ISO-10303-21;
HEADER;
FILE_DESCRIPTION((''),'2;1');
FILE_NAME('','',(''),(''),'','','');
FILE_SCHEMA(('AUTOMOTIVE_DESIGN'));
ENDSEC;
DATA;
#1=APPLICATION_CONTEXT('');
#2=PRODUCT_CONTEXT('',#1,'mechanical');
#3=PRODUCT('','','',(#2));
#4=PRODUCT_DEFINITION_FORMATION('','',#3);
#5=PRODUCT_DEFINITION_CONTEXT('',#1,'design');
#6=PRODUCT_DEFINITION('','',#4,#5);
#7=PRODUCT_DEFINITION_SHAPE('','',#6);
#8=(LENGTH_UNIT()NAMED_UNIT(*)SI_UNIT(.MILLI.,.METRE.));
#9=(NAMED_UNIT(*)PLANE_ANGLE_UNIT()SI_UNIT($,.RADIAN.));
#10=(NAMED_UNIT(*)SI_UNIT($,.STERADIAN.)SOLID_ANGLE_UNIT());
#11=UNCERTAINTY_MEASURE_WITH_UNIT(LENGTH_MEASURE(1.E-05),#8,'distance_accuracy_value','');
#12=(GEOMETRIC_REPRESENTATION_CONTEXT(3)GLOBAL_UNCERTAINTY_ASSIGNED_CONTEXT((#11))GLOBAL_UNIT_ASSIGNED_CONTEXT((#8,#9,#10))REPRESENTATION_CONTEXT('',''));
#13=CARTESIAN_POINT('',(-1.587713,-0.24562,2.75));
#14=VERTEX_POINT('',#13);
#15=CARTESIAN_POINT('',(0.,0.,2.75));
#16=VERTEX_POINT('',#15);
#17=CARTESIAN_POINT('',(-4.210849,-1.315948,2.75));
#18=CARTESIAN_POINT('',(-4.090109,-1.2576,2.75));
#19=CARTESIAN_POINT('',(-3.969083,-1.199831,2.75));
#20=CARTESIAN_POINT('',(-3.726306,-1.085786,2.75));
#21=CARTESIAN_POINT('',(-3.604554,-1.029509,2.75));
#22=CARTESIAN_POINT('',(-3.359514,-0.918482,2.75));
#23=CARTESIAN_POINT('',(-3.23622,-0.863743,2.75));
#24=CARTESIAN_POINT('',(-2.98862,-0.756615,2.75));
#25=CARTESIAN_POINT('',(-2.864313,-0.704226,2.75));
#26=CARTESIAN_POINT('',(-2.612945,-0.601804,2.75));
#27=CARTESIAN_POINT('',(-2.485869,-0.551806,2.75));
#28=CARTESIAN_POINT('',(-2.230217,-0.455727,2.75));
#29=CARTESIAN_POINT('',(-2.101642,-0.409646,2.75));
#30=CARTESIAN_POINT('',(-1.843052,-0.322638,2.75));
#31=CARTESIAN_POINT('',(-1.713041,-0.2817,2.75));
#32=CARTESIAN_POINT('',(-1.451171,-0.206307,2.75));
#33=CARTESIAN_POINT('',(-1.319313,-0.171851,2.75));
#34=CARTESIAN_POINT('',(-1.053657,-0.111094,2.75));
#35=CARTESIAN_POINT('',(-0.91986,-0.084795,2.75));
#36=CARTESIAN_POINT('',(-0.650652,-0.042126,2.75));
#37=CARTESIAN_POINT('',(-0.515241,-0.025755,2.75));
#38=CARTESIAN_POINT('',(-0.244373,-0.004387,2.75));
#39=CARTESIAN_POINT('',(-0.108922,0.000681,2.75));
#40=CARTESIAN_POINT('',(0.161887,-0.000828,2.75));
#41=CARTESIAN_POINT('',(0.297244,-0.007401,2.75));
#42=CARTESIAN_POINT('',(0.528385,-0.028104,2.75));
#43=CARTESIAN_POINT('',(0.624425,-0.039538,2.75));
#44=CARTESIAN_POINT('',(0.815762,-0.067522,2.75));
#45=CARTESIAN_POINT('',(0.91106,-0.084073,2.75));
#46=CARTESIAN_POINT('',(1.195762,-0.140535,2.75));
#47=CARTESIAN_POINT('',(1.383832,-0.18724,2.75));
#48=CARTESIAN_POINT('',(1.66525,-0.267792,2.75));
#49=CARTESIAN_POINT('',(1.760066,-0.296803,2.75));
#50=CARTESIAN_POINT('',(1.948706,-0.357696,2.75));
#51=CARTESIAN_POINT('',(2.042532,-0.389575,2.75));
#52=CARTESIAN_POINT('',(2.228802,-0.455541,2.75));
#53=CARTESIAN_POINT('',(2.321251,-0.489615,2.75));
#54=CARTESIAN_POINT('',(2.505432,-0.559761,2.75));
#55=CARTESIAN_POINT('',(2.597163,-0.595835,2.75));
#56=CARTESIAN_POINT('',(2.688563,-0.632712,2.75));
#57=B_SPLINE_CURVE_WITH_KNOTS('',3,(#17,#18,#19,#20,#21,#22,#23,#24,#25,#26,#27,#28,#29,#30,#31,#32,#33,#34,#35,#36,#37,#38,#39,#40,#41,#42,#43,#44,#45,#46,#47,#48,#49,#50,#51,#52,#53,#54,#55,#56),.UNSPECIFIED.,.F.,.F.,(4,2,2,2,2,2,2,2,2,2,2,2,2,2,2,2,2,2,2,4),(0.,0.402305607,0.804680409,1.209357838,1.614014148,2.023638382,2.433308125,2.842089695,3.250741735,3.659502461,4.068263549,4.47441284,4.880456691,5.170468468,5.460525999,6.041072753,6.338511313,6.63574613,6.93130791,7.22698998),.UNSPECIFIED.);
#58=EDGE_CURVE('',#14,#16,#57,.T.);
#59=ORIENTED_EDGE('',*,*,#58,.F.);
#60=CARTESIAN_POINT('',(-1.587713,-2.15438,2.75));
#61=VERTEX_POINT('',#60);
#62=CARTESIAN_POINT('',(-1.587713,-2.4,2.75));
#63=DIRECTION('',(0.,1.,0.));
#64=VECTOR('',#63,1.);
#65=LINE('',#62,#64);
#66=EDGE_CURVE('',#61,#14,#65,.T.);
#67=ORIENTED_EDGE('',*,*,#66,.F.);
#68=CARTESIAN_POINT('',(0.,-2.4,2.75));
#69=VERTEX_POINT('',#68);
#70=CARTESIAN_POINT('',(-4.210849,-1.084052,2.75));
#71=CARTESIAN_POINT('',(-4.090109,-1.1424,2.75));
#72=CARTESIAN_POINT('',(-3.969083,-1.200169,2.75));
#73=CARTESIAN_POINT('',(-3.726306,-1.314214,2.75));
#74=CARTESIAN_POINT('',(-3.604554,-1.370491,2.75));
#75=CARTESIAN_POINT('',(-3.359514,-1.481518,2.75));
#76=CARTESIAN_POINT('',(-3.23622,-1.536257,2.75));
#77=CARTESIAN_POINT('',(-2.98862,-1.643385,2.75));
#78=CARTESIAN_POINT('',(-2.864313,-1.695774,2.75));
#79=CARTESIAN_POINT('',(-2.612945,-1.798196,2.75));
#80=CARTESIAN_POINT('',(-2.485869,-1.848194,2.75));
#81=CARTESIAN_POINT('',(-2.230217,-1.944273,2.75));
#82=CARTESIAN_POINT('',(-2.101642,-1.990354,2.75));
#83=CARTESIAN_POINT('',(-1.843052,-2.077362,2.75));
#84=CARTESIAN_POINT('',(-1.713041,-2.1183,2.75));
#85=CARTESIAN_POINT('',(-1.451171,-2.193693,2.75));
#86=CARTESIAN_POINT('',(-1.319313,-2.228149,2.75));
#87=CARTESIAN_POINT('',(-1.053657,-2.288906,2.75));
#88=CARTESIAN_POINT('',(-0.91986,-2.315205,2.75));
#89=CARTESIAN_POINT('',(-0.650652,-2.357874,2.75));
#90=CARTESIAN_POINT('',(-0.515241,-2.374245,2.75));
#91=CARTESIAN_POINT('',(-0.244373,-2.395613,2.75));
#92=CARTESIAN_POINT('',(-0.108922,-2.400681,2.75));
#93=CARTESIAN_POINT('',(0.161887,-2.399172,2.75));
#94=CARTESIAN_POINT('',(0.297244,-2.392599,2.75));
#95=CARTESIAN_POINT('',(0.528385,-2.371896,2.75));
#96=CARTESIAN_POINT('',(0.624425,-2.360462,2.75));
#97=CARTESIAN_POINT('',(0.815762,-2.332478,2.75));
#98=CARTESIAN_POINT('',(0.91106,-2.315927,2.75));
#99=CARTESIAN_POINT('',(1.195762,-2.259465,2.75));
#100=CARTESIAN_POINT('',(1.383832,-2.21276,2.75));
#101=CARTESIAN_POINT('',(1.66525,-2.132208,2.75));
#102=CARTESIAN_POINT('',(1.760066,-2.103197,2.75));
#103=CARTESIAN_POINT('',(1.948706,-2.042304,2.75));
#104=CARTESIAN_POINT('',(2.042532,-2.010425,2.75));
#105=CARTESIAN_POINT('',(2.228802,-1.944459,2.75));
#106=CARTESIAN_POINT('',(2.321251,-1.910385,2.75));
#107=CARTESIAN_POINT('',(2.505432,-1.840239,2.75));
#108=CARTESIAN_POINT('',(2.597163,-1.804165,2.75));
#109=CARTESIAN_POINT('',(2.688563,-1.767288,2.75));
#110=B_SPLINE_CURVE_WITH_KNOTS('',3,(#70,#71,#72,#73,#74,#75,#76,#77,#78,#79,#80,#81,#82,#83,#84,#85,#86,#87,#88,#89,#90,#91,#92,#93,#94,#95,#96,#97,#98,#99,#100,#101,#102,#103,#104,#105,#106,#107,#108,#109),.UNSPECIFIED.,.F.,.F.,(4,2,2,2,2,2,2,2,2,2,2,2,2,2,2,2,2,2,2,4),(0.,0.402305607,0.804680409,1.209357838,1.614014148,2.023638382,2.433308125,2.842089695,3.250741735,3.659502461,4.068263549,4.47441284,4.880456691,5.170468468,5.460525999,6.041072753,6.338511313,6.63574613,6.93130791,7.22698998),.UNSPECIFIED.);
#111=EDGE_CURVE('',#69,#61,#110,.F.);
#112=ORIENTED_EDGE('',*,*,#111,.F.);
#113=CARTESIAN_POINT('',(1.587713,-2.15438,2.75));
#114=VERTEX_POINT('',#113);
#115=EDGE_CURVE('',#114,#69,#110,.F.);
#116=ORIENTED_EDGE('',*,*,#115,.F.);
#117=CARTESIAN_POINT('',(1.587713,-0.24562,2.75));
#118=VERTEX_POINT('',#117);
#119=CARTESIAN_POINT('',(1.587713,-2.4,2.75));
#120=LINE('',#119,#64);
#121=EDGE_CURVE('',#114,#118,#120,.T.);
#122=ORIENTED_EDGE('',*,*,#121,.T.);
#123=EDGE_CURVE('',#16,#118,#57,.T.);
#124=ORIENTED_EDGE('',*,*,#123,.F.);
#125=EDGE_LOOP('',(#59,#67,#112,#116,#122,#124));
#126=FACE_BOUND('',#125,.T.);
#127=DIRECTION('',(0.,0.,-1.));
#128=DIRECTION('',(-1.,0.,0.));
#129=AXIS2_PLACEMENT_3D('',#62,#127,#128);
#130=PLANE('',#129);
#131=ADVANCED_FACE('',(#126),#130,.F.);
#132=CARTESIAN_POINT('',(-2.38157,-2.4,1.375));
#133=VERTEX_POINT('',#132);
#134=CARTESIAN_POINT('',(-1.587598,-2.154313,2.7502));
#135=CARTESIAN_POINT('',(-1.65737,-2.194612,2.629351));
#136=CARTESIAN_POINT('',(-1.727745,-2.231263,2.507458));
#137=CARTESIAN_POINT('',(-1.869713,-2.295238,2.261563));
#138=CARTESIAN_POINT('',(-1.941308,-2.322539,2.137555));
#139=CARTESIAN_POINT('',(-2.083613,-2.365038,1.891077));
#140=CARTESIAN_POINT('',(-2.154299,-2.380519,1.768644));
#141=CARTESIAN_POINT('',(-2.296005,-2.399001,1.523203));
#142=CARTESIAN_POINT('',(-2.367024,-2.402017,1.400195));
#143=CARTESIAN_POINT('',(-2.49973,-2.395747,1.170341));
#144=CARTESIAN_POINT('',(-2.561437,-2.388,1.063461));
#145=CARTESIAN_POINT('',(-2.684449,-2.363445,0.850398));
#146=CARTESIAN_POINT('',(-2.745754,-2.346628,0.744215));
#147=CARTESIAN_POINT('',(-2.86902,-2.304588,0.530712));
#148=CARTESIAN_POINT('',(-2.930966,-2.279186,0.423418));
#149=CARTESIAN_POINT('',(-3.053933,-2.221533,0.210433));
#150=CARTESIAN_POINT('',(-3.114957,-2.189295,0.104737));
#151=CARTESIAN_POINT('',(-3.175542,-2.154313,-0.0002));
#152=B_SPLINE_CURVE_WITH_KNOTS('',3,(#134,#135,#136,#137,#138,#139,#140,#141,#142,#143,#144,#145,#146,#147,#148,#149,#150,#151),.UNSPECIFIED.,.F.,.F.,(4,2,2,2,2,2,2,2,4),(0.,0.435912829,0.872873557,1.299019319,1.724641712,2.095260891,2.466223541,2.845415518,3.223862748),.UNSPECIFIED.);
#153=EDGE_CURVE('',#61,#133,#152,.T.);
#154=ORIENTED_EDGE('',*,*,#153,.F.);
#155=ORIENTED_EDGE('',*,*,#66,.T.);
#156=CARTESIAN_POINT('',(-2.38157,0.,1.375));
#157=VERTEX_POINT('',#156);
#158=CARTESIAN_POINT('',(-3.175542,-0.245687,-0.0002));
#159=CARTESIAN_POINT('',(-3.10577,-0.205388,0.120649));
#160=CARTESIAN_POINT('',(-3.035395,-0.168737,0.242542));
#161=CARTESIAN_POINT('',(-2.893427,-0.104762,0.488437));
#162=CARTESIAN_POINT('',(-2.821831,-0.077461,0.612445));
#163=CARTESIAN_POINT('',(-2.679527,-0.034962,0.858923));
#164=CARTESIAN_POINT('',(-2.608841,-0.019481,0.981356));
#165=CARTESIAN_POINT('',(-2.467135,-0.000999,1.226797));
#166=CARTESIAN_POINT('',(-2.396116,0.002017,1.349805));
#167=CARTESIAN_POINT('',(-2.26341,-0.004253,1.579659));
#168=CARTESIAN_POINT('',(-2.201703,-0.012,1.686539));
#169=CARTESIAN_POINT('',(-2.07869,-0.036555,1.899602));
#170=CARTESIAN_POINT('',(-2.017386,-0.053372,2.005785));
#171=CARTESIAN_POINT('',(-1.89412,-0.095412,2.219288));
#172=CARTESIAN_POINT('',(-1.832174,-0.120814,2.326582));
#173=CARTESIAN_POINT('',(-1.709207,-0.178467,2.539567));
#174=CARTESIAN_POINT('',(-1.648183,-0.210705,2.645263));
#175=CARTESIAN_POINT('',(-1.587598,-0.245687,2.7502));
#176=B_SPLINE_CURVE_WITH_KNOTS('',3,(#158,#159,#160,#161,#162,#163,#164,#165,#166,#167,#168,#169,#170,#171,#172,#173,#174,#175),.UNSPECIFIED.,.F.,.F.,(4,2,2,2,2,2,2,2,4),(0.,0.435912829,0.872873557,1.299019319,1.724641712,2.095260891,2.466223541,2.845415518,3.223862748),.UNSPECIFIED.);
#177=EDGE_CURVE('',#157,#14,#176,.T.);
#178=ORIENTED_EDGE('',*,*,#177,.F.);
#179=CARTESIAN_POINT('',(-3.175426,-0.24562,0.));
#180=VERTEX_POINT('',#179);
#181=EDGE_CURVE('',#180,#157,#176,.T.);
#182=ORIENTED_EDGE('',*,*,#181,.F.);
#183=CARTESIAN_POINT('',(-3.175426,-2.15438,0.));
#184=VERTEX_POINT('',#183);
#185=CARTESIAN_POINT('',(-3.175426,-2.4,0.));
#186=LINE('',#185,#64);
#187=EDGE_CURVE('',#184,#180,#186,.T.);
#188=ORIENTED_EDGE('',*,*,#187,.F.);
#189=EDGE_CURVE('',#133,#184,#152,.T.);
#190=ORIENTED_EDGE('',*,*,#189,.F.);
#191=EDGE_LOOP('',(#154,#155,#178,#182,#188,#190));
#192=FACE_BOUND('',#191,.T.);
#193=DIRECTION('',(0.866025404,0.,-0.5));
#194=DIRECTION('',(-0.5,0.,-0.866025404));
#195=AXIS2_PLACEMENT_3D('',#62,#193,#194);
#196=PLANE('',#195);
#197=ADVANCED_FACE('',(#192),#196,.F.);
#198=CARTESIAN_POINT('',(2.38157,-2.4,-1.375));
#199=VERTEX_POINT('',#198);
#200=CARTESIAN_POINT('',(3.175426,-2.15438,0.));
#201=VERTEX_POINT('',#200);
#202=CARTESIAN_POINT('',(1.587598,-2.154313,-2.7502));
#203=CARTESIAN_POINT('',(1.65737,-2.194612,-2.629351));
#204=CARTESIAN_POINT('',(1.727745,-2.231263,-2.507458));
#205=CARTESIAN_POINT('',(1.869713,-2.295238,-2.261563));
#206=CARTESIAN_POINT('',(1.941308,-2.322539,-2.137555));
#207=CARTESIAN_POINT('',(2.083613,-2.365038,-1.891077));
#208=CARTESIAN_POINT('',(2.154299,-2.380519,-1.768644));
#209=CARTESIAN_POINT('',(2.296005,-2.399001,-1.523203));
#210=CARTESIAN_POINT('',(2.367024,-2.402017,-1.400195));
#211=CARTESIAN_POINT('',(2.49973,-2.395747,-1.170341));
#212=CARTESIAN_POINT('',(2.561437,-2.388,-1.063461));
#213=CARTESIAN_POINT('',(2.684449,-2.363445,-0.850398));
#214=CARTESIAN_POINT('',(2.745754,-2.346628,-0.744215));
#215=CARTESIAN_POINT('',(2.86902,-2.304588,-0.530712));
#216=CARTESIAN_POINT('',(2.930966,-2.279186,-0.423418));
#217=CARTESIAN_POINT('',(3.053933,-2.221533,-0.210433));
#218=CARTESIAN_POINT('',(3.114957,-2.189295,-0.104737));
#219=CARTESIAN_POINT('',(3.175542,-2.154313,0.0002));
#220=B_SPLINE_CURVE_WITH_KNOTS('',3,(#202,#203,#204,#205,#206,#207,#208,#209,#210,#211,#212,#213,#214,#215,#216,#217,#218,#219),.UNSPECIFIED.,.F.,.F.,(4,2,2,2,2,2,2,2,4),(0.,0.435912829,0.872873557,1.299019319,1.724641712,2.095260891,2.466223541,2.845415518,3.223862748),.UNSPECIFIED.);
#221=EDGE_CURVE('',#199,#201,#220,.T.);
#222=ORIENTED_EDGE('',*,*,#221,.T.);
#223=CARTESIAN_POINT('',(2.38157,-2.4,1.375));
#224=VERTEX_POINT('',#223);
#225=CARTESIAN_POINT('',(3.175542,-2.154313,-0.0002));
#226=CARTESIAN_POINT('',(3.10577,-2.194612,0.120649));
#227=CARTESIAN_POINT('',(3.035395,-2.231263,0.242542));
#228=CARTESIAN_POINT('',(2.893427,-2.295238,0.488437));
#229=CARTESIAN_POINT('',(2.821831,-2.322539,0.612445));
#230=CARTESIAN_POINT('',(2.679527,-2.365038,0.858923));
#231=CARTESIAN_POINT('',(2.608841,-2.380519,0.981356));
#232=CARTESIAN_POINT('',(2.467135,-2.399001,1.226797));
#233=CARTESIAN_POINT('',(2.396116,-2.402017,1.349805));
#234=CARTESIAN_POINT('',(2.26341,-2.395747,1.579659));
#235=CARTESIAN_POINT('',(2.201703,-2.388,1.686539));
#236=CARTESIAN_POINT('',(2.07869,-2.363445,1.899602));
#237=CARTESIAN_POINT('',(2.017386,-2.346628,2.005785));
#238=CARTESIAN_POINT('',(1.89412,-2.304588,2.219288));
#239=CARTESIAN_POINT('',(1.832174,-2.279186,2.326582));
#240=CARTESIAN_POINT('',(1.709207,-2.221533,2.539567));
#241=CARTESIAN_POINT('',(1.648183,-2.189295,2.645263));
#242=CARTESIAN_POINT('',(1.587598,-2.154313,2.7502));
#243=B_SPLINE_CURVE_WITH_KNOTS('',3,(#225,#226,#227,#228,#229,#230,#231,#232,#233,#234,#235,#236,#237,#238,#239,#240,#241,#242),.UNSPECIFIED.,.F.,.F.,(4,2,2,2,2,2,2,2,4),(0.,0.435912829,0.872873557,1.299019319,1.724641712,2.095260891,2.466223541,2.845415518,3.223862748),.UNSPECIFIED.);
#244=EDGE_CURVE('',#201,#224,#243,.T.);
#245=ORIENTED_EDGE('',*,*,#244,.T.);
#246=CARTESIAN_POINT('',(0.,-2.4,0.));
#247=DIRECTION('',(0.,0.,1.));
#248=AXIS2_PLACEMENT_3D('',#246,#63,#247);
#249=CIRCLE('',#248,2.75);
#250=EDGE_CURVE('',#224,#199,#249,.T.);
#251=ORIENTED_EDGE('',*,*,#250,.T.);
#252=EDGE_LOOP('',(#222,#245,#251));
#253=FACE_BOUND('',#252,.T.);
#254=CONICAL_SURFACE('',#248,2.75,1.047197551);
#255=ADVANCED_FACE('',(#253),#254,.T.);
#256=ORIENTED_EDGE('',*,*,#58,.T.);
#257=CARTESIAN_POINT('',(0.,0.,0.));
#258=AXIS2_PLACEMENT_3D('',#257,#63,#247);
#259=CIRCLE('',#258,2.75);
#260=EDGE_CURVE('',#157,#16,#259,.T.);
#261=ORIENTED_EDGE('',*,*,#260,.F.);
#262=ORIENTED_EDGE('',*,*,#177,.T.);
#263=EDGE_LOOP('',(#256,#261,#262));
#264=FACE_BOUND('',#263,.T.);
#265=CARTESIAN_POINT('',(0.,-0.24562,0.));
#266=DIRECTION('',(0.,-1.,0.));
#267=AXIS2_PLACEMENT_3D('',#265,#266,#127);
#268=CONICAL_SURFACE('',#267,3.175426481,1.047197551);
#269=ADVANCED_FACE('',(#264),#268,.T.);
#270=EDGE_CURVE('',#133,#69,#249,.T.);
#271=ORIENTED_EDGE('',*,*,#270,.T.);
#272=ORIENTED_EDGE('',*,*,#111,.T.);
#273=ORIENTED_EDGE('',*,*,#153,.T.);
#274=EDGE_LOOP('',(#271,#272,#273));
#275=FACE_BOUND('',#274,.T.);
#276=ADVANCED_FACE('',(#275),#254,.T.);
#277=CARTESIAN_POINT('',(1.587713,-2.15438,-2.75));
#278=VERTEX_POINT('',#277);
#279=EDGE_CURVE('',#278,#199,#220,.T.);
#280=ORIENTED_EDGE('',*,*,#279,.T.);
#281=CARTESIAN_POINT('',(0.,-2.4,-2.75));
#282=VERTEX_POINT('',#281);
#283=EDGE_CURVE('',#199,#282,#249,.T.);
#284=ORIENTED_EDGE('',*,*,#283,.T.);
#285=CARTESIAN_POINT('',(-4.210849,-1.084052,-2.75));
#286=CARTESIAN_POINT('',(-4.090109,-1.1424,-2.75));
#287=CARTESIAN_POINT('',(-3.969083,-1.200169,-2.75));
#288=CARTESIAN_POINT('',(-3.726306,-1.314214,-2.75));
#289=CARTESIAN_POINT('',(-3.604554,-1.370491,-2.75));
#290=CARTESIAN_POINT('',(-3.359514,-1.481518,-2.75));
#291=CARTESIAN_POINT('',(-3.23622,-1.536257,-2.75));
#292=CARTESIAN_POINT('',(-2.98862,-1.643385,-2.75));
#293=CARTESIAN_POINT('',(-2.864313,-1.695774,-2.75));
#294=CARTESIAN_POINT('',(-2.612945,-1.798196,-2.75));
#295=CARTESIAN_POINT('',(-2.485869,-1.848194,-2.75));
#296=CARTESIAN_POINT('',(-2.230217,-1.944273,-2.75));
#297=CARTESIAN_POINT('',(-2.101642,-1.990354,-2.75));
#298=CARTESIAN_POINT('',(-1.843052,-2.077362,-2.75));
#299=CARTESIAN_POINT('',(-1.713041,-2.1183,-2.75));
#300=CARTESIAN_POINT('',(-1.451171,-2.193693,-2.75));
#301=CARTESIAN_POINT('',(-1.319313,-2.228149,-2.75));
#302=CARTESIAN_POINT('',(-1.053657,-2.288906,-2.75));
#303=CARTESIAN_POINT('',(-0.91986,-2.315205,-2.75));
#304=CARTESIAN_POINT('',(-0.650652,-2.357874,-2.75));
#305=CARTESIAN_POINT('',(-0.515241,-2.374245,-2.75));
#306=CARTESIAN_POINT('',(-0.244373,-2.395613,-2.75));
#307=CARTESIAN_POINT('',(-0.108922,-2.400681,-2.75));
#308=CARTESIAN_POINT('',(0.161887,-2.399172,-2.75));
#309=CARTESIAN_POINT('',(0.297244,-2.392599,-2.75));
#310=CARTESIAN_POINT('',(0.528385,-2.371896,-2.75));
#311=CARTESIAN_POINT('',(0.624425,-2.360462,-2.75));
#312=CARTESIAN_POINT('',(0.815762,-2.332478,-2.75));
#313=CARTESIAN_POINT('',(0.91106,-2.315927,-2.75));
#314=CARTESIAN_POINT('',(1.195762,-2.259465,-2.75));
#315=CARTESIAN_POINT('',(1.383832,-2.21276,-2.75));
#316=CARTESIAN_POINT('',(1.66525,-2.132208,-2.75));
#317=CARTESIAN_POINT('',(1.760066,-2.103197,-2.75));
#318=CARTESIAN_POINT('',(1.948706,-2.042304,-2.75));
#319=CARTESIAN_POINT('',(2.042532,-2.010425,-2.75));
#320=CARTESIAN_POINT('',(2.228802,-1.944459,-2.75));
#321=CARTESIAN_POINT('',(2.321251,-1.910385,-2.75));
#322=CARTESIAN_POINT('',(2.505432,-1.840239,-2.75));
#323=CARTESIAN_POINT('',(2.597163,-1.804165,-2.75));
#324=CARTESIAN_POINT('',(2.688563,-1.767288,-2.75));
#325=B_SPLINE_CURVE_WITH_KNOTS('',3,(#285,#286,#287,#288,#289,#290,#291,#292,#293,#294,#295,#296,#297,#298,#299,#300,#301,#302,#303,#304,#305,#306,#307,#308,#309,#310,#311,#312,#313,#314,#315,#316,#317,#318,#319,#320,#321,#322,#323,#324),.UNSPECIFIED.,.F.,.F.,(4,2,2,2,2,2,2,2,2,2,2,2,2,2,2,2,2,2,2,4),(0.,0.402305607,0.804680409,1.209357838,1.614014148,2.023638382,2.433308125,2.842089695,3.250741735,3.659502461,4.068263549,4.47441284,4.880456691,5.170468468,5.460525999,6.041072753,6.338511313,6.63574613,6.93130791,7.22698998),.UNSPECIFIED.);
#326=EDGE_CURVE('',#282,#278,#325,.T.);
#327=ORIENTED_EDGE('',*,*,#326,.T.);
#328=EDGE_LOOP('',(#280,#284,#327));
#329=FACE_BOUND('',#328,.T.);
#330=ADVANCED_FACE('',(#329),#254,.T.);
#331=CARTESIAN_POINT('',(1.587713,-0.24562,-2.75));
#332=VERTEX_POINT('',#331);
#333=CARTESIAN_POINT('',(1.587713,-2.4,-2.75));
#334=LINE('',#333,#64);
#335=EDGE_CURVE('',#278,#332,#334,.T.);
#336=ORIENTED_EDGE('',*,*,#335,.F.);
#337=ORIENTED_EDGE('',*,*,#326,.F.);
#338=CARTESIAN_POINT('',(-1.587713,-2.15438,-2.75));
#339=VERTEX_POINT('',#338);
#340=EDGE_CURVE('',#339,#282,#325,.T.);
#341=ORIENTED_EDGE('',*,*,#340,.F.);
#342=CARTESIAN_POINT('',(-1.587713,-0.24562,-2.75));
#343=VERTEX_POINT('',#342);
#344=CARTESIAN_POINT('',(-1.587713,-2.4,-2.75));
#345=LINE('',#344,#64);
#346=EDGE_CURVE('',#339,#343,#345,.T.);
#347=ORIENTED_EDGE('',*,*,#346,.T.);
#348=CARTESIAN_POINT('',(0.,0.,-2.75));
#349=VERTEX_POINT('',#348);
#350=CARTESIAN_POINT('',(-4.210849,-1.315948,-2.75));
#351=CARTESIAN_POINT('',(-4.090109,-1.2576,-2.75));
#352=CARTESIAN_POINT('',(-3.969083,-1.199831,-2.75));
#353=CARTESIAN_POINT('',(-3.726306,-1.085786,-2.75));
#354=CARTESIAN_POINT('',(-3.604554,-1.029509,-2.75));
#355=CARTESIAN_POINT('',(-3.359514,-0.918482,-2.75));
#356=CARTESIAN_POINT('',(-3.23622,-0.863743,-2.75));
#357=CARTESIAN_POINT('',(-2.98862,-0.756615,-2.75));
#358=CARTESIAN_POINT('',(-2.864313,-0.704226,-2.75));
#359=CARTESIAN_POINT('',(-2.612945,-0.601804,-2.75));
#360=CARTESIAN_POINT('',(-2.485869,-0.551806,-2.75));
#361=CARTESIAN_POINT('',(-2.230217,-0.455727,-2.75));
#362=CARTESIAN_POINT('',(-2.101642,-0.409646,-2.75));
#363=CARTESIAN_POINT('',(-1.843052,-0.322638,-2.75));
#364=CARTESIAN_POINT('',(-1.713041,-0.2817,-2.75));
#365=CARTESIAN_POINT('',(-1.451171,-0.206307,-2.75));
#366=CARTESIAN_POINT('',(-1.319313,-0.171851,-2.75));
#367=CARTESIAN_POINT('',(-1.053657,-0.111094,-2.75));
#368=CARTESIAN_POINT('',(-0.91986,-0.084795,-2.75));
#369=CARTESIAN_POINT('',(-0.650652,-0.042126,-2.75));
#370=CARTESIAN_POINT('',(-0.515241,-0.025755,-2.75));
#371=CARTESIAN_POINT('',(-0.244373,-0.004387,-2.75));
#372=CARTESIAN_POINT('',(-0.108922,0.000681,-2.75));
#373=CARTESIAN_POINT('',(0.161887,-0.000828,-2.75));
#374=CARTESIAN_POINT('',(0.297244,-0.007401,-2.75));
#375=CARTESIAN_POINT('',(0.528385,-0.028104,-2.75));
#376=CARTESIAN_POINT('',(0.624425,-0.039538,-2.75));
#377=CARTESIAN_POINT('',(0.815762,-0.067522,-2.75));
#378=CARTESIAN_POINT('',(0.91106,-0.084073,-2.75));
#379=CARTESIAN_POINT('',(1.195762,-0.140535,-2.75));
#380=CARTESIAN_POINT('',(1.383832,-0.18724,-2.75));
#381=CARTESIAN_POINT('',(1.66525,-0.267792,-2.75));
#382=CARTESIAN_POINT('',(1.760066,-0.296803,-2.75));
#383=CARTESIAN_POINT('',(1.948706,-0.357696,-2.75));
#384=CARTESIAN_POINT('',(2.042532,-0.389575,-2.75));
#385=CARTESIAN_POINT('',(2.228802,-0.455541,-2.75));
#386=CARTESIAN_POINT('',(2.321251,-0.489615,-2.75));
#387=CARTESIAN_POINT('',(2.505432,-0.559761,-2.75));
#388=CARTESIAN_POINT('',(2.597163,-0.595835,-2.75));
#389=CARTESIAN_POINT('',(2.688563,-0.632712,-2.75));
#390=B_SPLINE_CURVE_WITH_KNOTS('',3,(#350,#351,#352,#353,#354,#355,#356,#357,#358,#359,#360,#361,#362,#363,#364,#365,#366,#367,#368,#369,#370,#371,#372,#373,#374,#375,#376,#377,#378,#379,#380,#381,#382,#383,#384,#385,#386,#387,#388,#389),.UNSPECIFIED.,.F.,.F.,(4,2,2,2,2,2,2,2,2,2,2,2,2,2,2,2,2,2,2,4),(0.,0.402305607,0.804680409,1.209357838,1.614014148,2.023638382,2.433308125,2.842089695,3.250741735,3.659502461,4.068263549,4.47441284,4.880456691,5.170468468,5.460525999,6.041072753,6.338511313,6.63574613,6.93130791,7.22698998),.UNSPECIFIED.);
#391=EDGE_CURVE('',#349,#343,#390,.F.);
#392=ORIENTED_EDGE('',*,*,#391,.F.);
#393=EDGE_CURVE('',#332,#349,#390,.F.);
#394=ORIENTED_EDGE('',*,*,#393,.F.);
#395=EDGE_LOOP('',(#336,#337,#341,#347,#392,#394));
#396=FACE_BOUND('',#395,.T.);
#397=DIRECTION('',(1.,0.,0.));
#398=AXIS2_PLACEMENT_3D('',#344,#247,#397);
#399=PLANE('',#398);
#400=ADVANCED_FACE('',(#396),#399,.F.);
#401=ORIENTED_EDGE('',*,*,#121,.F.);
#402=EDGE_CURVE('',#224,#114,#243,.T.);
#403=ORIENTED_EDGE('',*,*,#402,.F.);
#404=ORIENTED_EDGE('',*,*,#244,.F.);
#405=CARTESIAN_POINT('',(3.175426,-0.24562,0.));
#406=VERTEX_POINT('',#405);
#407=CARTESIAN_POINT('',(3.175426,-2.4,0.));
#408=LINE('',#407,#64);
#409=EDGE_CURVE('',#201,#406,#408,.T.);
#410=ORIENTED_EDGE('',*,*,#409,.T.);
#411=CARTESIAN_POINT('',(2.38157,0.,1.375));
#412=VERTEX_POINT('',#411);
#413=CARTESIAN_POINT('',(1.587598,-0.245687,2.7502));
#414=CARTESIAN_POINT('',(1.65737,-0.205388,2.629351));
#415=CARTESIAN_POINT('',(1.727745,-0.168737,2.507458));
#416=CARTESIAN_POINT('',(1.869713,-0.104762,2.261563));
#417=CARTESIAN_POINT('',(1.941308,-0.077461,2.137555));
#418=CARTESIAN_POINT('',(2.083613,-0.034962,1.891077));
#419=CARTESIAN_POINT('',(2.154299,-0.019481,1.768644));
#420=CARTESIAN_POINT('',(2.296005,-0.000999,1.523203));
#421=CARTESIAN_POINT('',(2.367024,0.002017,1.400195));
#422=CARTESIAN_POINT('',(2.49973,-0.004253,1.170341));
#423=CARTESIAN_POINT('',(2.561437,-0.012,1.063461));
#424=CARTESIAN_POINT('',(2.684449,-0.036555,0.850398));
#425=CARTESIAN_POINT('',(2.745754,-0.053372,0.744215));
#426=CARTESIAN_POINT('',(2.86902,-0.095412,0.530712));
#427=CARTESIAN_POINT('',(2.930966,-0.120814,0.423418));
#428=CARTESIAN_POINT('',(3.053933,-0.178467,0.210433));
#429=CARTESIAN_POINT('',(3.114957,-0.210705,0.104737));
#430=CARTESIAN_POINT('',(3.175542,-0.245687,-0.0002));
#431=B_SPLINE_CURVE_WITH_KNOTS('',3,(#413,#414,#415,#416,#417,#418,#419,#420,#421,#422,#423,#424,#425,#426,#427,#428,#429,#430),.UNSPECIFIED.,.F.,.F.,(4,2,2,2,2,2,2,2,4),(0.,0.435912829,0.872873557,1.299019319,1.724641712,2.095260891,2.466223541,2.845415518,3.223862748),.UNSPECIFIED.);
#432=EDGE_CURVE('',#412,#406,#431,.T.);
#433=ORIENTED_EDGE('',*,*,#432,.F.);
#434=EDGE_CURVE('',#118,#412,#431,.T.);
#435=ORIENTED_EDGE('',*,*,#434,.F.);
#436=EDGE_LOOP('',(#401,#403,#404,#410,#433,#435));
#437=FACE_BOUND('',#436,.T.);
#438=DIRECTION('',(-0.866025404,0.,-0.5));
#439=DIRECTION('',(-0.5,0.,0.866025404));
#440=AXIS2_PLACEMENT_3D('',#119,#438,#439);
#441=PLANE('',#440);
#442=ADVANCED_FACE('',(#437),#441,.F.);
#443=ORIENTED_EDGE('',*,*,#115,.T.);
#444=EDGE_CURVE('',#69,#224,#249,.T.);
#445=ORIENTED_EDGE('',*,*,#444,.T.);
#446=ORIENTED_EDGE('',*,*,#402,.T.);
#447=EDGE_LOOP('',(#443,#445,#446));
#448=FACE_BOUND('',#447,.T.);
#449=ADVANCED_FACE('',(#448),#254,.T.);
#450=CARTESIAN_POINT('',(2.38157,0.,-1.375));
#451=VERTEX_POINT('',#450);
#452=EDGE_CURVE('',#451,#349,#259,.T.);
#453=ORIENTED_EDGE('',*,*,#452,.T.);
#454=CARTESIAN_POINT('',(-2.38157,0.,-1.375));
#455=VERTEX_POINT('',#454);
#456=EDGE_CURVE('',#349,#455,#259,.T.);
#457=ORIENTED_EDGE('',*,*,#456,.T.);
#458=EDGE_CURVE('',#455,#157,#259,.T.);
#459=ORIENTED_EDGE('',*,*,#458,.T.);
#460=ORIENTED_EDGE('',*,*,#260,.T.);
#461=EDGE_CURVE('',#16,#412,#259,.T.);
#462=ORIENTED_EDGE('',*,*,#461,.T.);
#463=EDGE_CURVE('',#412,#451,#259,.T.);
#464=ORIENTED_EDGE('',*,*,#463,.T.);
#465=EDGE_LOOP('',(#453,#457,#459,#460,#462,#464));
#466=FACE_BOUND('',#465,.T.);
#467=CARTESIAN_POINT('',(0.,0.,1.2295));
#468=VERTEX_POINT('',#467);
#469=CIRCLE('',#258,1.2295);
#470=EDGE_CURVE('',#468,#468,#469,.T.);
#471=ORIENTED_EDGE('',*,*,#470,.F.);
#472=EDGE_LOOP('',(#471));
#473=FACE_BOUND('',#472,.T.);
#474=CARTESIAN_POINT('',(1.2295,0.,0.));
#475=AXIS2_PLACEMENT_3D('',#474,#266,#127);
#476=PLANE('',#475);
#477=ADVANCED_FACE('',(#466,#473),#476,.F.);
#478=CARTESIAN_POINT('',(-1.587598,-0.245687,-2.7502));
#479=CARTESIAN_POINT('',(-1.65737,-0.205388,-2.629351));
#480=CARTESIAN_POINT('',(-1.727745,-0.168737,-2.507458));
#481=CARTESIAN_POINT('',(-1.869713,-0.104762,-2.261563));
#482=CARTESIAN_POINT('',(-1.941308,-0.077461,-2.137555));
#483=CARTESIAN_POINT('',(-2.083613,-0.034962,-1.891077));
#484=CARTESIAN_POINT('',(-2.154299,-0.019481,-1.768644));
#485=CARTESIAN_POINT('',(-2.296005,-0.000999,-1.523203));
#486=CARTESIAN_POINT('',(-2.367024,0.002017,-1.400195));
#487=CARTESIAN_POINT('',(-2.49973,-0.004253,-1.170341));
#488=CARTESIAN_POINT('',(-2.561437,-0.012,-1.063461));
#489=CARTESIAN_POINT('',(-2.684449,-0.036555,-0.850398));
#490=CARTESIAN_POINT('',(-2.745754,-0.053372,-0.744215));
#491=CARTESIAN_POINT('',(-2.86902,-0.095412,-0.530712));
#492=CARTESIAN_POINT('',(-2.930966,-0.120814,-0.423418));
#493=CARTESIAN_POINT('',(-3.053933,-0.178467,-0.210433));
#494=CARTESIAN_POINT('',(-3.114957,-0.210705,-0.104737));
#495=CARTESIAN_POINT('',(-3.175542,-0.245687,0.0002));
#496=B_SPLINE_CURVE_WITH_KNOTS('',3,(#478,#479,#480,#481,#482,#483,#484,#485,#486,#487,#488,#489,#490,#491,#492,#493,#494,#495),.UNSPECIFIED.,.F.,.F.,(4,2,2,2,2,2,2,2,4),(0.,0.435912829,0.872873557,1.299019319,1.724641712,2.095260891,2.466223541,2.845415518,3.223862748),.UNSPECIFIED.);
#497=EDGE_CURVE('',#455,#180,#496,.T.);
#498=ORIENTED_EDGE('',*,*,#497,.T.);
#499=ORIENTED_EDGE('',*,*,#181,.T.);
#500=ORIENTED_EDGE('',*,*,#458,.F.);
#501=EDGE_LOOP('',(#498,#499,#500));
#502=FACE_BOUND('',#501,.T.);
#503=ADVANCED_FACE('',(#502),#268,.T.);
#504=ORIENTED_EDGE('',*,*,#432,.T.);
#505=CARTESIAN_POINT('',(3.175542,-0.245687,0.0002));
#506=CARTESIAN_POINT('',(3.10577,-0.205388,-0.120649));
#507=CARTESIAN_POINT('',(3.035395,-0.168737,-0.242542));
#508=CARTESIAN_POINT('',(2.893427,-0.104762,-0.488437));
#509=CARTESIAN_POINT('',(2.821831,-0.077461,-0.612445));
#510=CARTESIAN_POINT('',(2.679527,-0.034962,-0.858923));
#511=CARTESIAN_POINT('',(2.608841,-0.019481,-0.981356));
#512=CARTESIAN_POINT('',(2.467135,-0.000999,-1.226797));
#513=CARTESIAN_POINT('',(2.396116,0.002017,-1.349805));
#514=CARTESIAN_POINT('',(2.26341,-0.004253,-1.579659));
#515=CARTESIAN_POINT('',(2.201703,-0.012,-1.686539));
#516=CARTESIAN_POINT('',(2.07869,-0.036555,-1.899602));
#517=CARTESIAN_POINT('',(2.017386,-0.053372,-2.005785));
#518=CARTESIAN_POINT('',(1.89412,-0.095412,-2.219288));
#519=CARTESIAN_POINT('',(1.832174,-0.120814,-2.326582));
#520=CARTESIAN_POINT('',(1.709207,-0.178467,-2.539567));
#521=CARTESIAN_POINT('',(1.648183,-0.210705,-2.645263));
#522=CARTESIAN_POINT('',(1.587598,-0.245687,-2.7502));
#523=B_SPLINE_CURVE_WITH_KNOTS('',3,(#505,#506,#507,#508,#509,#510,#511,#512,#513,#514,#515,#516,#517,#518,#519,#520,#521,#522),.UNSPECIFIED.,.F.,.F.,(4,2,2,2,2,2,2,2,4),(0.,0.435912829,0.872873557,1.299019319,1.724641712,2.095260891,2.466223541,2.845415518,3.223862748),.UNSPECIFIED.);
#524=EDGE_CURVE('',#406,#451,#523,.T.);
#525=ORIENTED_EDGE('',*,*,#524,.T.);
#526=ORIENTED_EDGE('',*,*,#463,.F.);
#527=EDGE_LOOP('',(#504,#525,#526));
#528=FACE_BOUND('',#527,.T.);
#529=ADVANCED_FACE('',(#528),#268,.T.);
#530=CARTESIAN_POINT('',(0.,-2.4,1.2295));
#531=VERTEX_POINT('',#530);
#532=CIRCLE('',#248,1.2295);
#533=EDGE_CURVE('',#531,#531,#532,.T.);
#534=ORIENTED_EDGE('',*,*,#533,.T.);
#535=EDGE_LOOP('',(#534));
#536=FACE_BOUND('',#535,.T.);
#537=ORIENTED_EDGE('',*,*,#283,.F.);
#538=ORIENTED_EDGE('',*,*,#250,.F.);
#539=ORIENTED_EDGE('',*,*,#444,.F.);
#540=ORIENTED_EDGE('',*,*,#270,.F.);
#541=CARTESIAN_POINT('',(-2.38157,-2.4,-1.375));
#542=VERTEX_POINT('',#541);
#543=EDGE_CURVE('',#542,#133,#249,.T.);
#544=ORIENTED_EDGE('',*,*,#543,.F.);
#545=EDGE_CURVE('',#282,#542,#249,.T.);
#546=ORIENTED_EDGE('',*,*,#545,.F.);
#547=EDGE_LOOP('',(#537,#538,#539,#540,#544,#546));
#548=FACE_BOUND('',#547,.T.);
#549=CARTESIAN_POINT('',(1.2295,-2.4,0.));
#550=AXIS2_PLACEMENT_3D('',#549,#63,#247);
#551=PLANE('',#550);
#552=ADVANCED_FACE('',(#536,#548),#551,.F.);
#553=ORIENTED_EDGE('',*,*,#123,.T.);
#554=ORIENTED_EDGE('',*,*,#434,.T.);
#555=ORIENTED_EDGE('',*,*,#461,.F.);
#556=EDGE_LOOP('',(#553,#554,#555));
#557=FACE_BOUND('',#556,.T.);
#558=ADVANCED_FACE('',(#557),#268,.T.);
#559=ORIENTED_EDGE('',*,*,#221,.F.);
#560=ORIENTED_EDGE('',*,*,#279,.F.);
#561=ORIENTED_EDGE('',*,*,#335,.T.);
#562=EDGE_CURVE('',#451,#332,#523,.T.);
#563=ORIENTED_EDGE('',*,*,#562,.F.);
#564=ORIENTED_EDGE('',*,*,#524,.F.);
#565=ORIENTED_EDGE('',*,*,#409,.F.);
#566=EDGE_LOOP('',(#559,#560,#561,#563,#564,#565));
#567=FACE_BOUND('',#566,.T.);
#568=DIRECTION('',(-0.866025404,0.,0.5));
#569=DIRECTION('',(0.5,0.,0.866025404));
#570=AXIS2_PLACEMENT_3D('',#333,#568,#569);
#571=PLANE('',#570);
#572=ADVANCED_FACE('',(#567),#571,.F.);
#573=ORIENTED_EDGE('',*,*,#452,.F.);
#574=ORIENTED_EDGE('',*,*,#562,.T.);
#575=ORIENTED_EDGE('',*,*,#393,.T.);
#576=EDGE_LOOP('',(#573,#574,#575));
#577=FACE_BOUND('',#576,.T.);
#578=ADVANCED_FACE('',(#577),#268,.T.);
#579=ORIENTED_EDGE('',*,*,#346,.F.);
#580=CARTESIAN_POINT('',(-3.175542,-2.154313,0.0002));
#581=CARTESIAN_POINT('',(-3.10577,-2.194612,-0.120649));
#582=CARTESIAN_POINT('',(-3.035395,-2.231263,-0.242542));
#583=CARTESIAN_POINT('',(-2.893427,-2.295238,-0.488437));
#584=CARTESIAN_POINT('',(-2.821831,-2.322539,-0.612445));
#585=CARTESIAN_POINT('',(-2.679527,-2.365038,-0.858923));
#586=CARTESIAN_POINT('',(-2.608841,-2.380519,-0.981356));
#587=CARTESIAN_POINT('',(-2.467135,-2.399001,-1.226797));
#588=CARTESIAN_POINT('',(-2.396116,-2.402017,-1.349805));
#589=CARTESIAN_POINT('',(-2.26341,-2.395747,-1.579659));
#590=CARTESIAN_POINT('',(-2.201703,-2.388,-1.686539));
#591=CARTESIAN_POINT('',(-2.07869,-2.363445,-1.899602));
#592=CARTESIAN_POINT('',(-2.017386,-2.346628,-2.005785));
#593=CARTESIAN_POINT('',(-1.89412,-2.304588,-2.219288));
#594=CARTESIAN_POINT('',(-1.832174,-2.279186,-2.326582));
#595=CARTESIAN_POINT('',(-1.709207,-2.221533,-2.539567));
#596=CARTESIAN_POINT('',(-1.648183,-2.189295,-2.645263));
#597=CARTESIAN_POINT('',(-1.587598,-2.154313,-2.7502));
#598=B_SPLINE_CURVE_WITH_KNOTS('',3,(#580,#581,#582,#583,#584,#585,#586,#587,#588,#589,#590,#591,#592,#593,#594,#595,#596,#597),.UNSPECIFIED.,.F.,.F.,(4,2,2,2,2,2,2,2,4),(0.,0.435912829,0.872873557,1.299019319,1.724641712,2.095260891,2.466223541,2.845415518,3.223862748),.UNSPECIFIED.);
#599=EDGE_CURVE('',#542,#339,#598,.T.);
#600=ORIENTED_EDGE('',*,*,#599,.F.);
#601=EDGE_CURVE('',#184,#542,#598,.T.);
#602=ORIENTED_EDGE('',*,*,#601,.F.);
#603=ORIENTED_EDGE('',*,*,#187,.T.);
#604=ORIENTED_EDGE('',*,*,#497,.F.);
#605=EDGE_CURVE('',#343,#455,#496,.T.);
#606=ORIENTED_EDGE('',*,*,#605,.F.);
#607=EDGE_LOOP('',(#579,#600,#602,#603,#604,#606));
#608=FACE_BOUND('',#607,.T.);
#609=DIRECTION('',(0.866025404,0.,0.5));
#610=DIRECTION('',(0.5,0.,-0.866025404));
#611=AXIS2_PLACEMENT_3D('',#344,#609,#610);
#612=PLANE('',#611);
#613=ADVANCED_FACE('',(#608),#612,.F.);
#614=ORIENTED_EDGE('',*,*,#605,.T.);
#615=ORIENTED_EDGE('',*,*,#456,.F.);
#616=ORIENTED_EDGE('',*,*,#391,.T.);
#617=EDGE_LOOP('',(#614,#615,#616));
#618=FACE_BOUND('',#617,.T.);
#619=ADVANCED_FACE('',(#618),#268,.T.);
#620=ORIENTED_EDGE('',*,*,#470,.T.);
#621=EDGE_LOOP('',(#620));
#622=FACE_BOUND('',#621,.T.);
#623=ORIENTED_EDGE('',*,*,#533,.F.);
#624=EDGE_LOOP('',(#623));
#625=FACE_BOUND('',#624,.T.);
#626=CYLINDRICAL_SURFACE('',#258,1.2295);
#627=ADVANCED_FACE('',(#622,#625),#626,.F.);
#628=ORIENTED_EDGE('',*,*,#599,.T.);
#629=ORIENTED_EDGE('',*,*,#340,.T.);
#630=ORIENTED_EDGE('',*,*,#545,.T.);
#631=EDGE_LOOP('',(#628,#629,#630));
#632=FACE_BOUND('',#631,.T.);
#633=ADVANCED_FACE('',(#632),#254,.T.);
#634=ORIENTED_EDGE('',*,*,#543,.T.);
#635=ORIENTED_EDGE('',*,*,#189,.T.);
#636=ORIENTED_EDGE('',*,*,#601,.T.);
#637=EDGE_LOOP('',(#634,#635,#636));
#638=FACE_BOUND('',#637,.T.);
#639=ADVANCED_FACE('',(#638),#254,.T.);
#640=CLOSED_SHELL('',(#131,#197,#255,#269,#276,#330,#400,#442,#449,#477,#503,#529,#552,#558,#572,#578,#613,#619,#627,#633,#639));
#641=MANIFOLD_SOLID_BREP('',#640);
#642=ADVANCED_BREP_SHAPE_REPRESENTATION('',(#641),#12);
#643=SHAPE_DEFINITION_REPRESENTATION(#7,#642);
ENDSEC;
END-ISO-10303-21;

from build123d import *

# Parameters (mm, degrees)
SCHNITT_LINEAR_START            = -1e-07
SCHNITT_LINEAR_AUSTRAGEN1_DEPTH = 2.399991326


# Read off the part's stored shape, not the designer's step: Schnitt-Linear austragen1
with BuildPart() as part:
    # Skizze1 → Basis-Rotation (revolve)
    with BuildSketch(Plane.XY, mode=Mode.PRIVATE) as basis_rotation_sk:
        Polygon((1.2295, 0), (2.75, 0), (3.175426481, -0.245620093), (3.175426481, -2.154379907), (2.75, -2.4), (1.2295, -2.4), align=None)
    revolve(basis_rotation_sk.sketch.rotate(Axis((0, 0, 0), (0, -1, 0)), 90), axis=Axis((0, 0, 0), (0, -1, 0)))

    # Schnitt-Linear austragen1 outline → Schnitt-Linear austragen1 (cut)
    with BuildSketch(Plane.XZ.offset(SCHNITT_LINEAR_START)):
        with BuildLine():
            ThreePointArc((-1.58771324, -2.750000001), (0, -3.175426481), (1.58771324, -2.750000001))
            Line((1.58771324, -2.750000001), (-1.58771324, -2.750000001))
        make_face()
        with BuildLine():
            Line((3.175426481, 0), (1.58771324, -2.750000001))
            ThreePointArc((1.58771324, -2.750000001), (2.75, -1.587713241), (3.175426481, 0))
        make_face()
        with BuildLine():
            ThreePointArc((-3.175426481, 0), (-2.75, -1.587713241), (-1.58771324, -2.750000001))
            Line((-1.58771324, -2.750000001), (-3.175426481, 0))
        make_face()
        with BuildLine():
            Line((1.58771324, 2.750000001), (3.175426481, 0))
            ThreePointArc((3.175426481, 0), (2.75, 1.587713241), (1.58771324, 2.750000001))
        make_face()
        with BuildLine():
            ThreePointArc((-1.58771324, 2.750000001), (-2.75, 1.587713241), (-3.175426481, 0))
            Line((-3.175426481, 0), (-1.58771324, 2.750000001))
        make_face()
        with BuildLine():
            Line((-1.58771324, 2.750000001), (1.58771324, 2.750000001))
            ThreePointArc((1.58771324, 2.750000001), (0, 3.175426481), (-1.58771324, 2.750000001))
        make_face()
    extrude(amount=SCHNITT_LINEAR_AUSTRAGEN1_DEPTH, mode=Mode.SUBTRACT)


solid = part.part
